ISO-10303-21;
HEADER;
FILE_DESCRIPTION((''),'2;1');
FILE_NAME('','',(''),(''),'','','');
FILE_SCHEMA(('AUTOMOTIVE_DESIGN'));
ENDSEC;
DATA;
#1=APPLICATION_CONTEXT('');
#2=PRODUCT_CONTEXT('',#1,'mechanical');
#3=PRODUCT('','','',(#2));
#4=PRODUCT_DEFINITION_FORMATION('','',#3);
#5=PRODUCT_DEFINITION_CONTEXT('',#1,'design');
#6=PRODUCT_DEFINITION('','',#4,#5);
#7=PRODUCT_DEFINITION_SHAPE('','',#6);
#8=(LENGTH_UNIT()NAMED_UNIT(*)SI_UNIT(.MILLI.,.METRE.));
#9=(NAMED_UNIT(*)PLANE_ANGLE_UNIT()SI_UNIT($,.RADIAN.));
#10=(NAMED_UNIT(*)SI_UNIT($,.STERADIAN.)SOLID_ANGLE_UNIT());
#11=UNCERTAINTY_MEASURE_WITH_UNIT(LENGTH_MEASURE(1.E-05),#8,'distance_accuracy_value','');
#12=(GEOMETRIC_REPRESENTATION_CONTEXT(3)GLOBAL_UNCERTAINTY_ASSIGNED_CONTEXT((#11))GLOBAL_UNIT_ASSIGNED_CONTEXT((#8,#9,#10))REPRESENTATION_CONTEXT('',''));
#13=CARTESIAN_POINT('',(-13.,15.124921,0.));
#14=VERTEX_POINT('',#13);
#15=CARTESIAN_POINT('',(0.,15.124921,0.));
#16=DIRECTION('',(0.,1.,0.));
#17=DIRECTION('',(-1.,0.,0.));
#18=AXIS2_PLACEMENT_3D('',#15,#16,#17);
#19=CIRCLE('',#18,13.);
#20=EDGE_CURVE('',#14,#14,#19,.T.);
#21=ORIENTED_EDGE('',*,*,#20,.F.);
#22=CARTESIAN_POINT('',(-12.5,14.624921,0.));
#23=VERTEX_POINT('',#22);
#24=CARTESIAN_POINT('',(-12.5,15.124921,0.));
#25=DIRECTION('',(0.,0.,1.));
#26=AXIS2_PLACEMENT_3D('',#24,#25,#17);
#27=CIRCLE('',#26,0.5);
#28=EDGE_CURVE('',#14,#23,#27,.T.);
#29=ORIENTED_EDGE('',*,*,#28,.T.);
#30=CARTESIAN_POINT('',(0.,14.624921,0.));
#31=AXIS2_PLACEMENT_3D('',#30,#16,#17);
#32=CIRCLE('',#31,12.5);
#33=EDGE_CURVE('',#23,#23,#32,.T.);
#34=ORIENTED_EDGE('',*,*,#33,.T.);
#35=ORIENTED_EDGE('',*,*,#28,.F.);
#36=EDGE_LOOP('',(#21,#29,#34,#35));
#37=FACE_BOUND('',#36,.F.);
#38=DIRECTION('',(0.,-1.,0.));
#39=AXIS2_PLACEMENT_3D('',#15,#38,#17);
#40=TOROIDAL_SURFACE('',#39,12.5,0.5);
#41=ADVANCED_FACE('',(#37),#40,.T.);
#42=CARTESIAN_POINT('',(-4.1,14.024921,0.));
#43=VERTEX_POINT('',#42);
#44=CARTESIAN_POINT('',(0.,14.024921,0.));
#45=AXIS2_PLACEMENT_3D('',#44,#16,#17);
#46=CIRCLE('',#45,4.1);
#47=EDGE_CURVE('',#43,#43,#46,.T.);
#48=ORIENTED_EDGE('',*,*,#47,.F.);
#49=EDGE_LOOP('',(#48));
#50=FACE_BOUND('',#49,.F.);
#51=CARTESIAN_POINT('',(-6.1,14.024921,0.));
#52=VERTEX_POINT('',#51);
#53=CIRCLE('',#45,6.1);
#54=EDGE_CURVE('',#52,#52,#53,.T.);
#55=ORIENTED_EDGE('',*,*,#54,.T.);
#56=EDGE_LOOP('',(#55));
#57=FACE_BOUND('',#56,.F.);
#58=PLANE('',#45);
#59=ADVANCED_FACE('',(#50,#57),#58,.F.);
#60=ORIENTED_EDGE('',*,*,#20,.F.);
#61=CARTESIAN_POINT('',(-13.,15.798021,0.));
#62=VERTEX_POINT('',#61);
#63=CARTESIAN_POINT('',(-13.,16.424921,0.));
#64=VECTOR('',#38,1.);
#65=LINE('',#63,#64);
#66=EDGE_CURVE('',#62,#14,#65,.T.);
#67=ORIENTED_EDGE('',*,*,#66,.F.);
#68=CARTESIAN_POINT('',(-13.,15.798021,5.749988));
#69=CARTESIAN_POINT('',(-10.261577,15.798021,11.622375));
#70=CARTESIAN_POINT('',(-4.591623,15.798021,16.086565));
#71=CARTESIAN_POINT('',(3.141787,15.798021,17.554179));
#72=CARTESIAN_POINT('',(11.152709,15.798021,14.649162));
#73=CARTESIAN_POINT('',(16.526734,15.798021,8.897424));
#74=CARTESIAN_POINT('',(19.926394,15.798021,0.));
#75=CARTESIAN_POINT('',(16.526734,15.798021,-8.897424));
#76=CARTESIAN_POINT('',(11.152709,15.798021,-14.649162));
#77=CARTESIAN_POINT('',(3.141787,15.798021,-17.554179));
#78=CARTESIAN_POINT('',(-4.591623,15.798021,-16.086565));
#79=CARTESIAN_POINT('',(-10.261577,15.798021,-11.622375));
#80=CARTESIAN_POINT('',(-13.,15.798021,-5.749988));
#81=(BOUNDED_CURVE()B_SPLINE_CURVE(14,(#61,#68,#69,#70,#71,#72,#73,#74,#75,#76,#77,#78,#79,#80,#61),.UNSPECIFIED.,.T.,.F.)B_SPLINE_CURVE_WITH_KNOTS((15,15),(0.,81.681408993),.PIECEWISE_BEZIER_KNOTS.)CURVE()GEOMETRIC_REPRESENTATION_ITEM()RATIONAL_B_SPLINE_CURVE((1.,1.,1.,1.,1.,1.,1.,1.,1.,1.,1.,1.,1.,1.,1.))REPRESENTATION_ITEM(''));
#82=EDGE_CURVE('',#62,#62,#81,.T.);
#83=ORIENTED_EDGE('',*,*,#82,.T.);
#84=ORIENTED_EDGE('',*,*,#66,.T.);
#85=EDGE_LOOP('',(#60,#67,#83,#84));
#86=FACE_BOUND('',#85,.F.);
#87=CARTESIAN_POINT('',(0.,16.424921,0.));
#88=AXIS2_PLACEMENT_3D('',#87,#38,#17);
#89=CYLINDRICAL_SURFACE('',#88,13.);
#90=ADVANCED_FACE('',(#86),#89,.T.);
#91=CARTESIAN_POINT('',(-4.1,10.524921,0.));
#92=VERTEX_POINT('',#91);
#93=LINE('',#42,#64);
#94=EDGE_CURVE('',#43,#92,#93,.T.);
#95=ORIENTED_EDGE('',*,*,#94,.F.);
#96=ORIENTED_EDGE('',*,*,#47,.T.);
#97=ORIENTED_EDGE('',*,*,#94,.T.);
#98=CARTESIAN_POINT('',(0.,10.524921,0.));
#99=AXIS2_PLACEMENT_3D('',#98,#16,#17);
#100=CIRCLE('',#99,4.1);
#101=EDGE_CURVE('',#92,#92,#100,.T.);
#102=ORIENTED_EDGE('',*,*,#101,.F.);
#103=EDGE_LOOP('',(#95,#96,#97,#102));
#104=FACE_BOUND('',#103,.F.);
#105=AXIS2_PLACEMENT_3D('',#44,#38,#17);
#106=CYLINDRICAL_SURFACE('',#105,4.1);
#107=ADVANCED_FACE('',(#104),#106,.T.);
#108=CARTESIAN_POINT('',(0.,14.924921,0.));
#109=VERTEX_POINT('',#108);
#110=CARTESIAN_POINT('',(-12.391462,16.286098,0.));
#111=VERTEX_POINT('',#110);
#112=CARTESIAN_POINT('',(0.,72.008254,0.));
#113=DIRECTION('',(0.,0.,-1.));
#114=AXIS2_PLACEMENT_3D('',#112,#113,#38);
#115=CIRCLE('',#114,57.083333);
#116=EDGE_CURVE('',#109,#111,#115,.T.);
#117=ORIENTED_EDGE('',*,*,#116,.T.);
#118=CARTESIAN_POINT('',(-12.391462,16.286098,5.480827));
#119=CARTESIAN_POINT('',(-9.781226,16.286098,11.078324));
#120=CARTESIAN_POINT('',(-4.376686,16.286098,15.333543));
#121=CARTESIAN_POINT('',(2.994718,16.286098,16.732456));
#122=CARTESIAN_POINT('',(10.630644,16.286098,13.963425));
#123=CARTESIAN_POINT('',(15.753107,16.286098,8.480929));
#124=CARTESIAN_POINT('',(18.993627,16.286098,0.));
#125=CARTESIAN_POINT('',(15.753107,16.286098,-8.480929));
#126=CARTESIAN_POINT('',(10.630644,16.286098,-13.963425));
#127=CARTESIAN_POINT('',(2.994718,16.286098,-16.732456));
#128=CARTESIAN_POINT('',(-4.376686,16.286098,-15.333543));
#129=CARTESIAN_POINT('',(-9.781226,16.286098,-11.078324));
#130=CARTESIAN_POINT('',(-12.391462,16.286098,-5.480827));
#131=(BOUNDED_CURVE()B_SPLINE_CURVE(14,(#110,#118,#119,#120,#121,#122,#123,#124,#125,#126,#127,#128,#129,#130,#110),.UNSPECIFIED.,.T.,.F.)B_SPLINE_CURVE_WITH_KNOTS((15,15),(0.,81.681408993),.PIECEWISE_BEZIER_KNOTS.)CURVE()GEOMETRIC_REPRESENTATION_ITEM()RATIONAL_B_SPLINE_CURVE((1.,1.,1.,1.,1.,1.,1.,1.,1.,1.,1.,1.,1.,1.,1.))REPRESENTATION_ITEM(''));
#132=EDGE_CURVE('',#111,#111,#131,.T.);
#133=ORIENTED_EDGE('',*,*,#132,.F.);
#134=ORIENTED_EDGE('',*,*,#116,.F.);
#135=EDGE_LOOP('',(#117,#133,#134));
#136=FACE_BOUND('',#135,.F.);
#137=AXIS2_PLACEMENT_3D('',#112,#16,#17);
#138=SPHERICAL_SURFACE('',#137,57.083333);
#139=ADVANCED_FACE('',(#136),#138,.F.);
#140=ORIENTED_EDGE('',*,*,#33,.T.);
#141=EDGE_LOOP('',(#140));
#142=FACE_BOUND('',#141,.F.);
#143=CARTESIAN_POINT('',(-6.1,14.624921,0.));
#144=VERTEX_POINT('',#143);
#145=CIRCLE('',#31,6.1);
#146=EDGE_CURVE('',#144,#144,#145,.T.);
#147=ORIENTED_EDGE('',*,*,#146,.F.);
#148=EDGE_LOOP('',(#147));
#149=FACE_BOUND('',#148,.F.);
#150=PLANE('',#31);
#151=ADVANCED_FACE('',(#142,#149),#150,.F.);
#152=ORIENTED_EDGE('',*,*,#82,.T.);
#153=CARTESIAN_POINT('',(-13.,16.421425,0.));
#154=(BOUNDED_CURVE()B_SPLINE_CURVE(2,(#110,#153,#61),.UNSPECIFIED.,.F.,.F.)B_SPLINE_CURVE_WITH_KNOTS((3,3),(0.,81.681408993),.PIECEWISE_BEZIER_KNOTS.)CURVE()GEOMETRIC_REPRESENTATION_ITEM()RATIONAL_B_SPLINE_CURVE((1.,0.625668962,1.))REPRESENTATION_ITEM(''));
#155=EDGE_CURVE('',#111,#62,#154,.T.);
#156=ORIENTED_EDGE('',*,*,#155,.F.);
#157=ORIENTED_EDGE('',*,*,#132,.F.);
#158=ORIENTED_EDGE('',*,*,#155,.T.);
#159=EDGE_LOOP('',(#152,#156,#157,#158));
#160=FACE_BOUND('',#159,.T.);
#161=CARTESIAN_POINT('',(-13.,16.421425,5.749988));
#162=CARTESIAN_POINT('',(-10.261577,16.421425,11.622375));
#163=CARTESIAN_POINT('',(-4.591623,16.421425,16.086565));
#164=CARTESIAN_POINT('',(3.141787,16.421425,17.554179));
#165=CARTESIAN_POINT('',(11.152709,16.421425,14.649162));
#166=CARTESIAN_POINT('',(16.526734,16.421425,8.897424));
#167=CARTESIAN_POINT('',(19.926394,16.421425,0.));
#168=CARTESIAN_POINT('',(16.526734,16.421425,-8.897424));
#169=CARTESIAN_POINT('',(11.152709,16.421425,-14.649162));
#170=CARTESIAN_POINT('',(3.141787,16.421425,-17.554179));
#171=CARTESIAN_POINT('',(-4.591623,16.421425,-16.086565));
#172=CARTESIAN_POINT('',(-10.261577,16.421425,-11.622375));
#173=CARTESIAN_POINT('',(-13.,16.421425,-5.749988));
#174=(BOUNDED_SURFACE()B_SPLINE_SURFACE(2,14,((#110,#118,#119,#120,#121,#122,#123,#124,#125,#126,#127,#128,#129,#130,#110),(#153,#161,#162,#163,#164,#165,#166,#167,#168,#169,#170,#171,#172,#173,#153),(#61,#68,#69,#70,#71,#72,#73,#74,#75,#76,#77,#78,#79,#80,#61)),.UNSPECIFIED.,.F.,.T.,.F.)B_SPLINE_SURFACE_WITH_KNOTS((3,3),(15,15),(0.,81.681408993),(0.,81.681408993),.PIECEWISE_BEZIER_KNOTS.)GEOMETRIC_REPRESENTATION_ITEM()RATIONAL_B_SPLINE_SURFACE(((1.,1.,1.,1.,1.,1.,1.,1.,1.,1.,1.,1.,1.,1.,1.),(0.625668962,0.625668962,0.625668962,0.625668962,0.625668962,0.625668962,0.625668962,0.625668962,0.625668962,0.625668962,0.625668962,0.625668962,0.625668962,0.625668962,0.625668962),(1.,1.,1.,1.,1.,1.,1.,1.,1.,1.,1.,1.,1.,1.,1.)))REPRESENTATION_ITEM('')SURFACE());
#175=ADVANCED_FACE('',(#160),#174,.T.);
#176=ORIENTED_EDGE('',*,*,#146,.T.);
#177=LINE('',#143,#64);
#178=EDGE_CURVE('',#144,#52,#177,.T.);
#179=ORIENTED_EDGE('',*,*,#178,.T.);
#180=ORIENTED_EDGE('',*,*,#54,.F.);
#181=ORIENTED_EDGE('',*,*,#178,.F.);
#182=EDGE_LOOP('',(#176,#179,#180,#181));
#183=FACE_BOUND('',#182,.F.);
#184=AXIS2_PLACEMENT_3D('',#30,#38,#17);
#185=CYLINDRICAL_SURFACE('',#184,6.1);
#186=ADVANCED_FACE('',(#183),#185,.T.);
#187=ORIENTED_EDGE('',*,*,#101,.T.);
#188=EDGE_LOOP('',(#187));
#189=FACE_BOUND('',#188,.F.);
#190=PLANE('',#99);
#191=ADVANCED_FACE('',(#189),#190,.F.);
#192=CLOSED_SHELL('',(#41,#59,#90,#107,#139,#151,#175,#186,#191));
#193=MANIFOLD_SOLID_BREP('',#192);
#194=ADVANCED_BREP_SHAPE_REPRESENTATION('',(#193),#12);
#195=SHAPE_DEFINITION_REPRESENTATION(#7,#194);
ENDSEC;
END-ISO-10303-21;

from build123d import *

# Parameters (mm, degrees)
F2_R = 0.5


with BuildPart() as f1:
    # F0 (on Top) → F1 (revolve)
    with BuildSketch(Plane.XY):
        with BuildLine():
            ThreePointArc((0, 14.924920715), (-6.5431261642, 15.3011606257), (-13, 16.424920715))
            Line((-13, 16.424920715), (-13, 14.624920715))
            Line((-13, 14.624920715), (-6.1, 14.624920715))
            Line((-6.1, 14.624920715), (-6.1, 14.024920715))
            Line((-6.1, 14.024920715), (-4.1, 14.024920715))
            Line((-4.1, 14.024920715), (-4.1, 10.524920715))
            Line((-4.1, 10.524920715), (0, 10.524920715))
            Line((0, 10.524920715), (0, 14.924920715))
        make_face()
    revolve(axis=Axis((0, 12.724920715, 0), (0, 1, 0)))

    # F2
    f2_edges = [f1.edges().sort_by_distance(p)[0] for p in [
        (13, 14.624921, 0),
        (13, 16.424921, 0),
    ]]
    fillet(f2_edges, radius=F2_R)


solid = f1.part
